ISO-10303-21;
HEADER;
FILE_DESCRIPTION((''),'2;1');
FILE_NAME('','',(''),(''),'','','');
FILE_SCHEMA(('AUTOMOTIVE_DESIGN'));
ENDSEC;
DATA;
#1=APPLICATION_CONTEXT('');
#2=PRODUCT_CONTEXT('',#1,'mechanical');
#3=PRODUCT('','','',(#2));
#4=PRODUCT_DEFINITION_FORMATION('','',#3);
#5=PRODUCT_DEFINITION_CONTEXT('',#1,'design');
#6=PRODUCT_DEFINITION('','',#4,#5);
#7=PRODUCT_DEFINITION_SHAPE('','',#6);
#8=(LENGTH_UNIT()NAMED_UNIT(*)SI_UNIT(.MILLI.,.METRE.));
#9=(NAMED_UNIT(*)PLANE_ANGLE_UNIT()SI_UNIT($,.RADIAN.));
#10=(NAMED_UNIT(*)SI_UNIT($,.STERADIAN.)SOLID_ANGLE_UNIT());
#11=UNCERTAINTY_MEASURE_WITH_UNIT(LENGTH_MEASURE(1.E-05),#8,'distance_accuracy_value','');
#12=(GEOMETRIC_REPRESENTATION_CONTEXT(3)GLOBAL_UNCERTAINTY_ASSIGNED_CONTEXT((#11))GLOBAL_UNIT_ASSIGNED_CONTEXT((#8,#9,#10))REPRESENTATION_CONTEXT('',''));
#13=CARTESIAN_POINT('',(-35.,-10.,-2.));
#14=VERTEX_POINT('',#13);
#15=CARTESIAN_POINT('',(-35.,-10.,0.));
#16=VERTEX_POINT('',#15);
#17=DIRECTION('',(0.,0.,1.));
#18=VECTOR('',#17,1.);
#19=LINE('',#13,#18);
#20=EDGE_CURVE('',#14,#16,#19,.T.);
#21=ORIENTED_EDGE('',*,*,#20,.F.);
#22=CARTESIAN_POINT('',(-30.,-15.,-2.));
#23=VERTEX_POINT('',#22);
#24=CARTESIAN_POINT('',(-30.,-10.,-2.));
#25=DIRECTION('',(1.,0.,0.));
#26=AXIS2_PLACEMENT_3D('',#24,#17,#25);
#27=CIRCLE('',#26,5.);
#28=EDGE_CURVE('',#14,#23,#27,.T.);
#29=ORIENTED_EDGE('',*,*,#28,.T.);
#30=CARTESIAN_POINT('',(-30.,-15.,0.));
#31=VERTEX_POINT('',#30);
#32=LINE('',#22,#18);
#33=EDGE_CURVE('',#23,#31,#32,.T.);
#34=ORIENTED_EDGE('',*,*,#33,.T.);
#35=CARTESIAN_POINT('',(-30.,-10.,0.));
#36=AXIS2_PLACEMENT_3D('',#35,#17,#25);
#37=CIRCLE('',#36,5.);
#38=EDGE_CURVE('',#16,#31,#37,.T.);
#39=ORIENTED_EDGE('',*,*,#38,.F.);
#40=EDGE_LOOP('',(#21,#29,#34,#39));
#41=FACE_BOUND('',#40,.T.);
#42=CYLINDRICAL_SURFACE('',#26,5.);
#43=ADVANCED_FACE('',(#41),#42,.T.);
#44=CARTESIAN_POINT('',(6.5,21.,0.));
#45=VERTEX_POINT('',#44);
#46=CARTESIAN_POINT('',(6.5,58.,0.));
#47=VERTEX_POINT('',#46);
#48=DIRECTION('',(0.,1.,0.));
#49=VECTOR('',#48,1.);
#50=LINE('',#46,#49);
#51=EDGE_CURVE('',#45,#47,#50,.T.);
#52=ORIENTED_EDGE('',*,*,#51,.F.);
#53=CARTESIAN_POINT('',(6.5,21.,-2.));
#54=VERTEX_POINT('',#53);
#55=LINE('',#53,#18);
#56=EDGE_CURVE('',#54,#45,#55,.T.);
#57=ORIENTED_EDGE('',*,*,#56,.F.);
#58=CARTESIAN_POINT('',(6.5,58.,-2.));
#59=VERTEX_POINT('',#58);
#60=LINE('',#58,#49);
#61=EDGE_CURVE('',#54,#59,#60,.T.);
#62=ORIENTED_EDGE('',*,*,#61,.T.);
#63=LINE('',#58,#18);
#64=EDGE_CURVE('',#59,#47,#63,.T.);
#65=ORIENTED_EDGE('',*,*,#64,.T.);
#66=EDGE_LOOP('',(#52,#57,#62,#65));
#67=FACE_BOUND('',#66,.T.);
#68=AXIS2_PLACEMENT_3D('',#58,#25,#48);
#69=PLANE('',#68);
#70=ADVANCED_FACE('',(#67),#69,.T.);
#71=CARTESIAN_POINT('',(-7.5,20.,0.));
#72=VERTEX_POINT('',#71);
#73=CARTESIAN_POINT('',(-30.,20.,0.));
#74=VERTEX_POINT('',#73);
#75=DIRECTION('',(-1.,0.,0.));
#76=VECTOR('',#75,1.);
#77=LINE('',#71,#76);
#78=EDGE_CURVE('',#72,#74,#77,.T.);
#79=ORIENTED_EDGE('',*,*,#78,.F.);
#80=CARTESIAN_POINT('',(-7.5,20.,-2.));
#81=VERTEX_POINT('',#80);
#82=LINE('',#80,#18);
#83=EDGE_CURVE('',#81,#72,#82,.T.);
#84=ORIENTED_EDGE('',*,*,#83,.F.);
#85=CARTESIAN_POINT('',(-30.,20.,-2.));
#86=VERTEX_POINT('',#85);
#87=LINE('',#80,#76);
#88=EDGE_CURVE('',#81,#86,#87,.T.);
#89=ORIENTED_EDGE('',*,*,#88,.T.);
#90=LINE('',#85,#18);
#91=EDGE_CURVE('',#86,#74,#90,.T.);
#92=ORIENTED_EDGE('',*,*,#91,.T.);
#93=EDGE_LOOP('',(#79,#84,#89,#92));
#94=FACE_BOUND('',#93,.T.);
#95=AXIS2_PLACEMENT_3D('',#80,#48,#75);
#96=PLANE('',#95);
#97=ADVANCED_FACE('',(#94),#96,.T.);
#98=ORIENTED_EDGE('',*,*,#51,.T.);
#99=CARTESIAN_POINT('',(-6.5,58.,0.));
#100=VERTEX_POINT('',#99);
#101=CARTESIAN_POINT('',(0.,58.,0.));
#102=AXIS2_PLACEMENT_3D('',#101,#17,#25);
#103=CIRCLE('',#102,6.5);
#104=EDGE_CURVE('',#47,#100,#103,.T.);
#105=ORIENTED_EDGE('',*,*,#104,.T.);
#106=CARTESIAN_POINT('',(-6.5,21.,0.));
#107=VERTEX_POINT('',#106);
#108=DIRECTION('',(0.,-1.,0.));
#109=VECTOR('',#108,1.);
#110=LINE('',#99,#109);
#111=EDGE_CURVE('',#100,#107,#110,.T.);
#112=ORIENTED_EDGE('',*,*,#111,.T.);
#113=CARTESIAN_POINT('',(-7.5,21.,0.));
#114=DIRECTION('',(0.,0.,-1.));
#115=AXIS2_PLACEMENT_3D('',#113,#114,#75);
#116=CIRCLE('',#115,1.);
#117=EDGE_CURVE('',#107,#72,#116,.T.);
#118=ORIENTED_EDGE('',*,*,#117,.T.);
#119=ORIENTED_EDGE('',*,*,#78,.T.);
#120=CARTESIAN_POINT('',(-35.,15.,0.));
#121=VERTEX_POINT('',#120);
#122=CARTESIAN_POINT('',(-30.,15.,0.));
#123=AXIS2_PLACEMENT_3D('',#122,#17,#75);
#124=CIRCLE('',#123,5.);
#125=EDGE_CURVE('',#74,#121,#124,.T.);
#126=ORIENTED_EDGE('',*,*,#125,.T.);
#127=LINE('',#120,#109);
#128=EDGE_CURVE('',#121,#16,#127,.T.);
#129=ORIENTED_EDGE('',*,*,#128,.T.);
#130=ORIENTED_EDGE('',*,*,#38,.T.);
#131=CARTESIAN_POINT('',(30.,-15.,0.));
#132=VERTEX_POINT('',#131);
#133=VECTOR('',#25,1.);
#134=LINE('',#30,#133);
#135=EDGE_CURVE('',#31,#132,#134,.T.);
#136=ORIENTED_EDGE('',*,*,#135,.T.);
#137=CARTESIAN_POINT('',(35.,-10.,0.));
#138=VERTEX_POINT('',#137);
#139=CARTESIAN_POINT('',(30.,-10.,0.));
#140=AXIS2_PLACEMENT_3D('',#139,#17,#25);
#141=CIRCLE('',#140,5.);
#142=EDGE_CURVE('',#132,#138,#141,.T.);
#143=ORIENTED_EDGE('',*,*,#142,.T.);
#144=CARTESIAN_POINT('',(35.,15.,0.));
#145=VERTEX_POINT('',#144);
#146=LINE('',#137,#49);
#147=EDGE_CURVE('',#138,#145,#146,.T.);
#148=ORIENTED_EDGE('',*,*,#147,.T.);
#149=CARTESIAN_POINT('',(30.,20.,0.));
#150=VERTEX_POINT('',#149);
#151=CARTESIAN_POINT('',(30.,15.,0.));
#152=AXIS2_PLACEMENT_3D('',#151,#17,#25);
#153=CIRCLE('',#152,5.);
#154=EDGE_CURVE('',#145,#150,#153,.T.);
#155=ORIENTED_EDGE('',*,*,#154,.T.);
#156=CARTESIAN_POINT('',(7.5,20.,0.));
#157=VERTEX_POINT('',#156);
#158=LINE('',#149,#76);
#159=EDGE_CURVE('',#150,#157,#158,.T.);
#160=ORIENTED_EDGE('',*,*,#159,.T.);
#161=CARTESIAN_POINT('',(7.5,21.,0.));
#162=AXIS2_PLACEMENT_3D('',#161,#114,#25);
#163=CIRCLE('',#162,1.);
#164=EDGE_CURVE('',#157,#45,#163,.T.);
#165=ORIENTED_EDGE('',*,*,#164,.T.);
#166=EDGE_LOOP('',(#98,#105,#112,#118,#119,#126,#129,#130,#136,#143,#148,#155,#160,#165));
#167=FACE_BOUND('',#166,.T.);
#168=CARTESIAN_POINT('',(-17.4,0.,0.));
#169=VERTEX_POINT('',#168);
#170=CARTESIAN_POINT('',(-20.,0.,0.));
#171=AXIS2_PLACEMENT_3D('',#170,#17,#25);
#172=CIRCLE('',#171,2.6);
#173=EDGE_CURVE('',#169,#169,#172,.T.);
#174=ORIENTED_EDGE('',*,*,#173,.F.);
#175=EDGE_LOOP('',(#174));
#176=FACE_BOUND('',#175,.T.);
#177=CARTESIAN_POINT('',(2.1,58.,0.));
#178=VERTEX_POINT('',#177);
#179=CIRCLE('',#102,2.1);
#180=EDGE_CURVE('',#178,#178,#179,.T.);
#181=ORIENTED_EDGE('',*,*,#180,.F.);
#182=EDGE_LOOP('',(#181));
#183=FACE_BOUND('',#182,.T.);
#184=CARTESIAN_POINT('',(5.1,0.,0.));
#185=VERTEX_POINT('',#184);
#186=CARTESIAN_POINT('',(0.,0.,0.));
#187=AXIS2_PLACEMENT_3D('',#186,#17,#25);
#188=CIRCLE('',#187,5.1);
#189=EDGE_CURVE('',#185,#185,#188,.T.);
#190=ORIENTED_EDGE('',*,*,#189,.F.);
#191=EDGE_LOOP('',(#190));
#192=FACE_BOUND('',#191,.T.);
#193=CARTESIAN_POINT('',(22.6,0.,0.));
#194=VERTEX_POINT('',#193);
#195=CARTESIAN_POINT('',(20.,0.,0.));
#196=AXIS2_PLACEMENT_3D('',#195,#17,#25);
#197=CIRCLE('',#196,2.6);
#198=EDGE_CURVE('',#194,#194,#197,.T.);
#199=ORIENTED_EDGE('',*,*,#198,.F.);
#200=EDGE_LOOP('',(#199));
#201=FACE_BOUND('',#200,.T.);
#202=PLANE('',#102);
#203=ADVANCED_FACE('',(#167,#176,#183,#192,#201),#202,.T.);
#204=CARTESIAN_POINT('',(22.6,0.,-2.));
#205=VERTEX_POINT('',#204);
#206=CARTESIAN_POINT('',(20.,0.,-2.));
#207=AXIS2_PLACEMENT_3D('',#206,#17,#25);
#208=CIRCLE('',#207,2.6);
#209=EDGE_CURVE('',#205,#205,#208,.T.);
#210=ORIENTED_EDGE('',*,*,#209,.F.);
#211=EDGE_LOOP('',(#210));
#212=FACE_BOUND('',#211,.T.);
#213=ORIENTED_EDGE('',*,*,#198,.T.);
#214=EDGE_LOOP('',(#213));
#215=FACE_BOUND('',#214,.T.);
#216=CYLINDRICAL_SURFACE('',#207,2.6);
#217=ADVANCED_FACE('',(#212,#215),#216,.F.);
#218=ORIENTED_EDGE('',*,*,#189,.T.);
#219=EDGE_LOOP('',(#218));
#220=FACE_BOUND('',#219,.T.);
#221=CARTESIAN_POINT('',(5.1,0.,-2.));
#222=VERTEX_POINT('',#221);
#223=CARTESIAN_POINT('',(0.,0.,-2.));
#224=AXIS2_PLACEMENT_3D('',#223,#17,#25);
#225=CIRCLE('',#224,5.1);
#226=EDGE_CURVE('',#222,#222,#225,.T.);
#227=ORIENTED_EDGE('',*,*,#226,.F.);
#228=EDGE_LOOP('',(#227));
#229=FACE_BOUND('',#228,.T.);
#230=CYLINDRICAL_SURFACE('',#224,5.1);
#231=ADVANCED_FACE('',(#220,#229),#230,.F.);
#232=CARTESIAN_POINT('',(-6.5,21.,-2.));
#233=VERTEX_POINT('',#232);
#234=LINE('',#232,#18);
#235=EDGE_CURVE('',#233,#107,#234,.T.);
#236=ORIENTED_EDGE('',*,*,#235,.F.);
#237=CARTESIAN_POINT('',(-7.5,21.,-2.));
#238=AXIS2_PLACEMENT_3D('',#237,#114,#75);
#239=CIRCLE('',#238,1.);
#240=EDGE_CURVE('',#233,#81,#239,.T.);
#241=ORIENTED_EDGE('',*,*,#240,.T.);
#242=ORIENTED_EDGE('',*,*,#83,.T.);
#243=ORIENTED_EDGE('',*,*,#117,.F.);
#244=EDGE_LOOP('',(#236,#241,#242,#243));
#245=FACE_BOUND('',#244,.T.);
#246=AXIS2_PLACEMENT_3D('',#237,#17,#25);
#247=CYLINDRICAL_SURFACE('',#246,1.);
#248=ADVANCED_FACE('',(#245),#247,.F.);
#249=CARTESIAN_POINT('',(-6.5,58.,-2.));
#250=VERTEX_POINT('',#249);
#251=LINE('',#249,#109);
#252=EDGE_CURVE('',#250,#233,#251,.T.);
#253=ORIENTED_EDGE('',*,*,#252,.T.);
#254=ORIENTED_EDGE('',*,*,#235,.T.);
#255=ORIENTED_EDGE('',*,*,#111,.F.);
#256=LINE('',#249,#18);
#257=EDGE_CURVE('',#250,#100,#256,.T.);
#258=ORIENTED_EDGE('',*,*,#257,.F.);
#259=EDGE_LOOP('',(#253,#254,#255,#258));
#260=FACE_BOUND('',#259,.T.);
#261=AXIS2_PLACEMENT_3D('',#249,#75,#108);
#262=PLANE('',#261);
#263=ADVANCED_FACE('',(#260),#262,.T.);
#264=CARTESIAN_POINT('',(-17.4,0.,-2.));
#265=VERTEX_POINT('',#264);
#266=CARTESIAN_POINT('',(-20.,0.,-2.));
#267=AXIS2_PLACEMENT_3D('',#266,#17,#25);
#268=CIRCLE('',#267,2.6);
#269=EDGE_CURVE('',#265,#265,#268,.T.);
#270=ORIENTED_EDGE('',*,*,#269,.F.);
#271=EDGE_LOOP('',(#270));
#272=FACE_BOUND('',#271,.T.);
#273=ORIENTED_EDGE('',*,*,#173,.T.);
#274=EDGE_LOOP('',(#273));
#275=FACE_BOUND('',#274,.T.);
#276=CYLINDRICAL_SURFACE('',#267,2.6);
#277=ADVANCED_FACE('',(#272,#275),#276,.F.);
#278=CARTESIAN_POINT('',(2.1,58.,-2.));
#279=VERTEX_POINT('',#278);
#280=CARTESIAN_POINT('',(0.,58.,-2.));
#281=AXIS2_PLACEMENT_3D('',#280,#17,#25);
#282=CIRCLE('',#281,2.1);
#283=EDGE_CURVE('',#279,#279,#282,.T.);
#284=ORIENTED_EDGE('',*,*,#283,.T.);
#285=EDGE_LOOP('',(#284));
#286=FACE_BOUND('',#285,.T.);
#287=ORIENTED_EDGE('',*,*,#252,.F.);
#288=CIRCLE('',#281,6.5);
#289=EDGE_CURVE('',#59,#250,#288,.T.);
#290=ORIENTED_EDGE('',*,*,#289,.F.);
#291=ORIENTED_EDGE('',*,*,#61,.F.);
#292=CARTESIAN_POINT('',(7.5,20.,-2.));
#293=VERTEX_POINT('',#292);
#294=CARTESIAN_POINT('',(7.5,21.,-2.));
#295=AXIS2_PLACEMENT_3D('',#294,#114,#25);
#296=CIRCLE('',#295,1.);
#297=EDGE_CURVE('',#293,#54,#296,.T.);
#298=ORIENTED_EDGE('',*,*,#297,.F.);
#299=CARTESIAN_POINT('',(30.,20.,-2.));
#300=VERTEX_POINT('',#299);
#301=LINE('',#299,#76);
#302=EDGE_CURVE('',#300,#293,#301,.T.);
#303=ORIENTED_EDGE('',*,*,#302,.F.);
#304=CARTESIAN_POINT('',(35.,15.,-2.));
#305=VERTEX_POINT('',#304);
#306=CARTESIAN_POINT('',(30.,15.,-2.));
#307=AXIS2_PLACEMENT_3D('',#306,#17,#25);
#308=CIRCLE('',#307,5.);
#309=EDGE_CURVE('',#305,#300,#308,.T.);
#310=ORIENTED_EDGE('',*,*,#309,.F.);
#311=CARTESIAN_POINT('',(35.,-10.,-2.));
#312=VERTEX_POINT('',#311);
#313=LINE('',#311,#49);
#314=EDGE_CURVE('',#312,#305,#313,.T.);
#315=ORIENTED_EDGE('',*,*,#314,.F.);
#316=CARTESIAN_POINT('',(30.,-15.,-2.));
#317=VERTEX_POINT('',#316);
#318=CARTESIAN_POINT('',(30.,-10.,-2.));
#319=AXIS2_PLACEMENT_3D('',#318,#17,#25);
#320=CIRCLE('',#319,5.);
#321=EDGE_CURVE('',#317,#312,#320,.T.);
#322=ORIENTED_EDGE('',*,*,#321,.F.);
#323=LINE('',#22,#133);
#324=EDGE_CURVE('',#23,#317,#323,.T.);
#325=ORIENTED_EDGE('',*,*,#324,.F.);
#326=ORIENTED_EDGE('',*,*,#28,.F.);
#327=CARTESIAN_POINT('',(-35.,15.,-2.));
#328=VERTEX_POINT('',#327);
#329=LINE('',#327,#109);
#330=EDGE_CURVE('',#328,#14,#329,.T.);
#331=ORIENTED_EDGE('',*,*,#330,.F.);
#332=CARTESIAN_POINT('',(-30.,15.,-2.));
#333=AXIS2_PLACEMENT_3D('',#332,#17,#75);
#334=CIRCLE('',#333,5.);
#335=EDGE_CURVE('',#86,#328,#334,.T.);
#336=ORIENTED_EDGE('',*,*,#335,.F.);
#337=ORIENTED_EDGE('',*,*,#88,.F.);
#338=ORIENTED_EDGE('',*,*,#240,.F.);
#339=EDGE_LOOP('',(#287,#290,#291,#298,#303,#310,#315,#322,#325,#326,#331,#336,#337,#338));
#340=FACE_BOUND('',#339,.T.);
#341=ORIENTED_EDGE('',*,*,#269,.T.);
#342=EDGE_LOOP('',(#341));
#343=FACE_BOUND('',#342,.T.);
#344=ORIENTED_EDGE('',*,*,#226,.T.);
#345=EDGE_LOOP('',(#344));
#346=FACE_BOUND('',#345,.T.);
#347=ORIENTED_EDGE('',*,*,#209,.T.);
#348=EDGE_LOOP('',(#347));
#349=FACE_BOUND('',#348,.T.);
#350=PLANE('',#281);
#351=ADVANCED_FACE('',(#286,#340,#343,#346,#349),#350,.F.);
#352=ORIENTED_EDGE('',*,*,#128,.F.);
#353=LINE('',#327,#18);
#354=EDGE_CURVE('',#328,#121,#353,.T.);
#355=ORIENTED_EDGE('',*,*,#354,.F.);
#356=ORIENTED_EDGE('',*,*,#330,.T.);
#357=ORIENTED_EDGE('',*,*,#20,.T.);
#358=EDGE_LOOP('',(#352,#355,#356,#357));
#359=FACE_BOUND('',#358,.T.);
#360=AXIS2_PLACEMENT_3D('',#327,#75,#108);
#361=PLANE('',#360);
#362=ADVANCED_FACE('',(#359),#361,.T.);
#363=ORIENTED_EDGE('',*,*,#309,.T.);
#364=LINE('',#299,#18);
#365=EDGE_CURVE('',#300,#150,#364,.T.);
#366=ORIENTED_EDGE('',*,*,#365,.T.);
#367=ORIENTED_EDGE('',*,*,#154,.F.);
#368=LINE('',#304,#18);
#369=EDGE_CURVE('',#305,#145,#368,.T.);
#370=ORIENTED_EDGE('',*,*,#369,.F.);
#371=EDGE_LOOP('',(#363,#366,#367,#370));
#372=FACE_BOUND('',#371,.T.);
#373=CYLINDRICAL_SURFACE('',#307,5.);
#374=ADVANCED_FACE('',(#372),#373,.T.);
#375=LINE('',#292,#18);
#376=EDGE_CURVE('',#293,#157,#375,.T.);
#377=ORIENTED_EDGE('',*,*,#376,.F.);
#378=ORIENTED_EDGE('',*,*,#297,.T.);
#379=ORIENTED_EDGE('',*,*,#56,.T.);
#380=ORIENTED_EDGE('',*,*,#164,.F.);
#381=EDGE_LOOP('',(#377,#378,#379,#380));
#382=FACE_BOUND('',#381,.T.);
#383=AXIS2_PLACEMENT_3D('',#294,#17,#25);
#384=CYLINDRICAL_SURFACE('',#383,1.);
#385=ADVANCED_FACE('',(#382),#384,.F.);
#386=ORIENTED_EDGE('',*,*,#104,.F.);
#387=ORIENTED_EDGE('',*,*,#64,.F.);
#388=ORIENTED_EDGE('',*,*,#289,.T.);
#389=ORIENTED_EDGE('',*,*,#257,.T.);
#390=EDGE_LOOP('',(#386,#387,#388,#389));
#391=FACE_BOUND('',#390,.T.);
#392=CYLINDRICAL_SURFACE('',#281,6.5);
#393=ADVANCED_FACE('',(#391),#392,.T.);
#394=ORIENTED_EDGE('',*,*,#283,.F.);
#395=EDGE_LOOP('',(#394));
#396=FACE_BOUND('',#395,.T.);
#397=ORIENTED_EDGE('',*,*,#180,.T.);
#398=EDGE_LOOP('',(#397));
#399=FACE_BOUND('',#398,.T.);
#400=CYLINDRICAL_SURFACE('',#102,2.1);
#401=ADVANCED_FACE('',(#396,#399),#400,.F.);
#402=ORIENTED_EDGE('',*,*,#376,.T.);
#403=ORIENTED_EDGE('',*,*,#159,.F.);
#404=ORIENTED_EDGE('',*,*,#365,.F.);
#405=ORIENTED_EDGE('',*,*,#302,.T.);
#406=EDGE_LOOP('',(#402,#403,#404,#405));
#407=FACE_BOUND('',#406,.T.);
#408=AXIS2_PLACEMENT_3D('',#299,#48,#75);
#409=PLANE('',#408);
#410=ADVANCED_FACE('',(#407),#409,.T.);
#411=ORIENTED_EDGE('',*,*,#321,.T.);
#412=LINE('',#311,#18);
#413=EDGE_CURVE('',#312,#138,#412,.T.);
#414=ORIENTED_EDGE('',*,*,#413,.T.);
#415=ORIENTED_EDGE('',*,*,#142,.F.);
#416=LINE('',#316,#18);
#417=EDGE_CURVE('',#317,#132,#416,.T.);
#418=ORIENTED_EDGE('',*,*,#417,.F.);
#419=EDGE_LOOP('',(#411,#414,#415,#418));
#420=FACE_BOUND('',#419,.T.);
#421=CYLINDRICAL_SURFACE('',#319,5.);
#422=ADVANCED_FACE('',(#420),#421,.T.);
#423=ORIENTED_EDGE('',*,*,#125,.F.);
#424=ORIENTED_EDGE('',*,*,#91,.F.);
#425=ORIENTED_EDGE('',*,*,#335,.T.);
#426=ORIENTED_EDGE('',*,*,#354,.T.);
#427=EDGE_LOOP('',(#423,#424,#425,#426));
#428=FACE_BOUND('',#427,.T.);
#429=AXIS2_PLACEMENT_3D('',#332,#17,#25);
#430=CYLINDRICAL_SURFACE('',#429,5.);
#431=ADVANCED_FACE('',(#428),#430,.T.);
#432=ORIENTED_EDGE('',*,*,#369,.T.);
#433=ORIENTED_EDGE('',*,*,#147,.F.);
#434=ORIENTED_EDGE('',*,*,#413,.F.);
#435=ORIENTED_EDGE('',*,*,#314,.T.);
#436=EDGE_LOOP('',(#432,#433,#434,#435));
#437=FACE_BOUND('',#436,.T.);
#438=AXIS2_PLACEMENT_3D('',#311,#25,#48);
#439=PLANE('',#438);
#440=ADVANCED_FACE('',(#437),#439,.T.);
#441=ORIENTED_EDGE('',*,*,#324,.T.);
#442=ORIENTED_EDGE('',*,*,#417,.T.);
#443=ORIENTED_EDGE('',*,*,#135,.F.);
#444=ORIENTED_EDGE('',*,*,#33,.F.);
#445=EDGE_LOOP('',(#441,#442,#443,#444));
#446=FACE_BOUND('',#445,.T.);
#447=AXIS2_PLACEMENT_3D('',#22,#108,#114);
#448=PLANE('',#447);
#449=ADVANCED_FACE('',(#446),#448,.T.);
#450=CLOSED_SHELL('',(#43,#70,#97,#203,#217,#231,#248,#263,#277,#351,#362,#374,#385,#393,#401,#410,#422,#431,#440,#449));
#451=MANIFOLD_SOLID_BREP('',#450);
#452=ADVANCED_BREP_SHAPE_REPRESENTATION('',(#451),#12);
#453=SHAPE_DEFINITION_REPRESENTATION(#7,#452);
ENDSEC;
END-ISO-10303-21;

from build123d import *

# Parameters (mm, degrees)
SKETCH1_R             = 2.6
SKETCH1_R_2           = 5.1
BASE_FLANGE1_DEPTH    = 2
M5X0_8_TAPPED_HOLE1_D = 4.2


# Sheet-metal steps are written as plain solids
with BuildPart() as part:
    # Sketch1 → Base-Flange1 (new body)
    with BuildSketch(Plane.XY):
        with BuildLine():
            Line((-35, 15), (-35, -10))
            ThreePointArc((-35, -10), (-33.535533906, -13.535533906), (-30, -15))
            Line((-30, -15), (30, -15))
            ThreePointArc((30, -15), (33.535533906, -13.535533906), (35, -10))
            Line((35, -10), (35, 15))
            ThreePointArc((35, 15), (33.535533906, 18.535533906), (30, 20))
            Line((30, 20), (7.5, 20))
            ThreePointArc((7.5, 20), (6.792893219, 20.292893219), (6.5, 21))
            Line((6.5, 21), (6.5, 58))
            ThreePointArc((6.5, 58), (0, 64.5), (-6.5, 58))
            Line((-6.5, 58), (-6.5, 21))
            ThreePointArc((-6.5, 21), (-6.792893219, 20.292893219), (-7.5, 20))
            Line((-7.5, 20), (-30, 20))
            ThreePointArc((-30, 20), (-33.535533906, 18.535533906), (-35, 15))
        make_face()
        with Locations((-20, 0)):
            Circle(SKETCH1_R, mode=Mode.SUBTRACT)
        Circle(SKETCH1_R_2, mode=Mode.SUBTRACT)
        with Locations((20, 0)):
            Circle(SKETCH1_R, mode=Mode.SUBTRACT)
    extrude(amount=-BASE_FLANGE1_DEPTH)

    # M5x0.8 Tapped Hole1 (through all)
    with Locations(Plane.XY):
        with Locations((0, 58)):
            Hole(M5X0_8_TAPPED_HOLE1_D / 2)


solid = part.part
